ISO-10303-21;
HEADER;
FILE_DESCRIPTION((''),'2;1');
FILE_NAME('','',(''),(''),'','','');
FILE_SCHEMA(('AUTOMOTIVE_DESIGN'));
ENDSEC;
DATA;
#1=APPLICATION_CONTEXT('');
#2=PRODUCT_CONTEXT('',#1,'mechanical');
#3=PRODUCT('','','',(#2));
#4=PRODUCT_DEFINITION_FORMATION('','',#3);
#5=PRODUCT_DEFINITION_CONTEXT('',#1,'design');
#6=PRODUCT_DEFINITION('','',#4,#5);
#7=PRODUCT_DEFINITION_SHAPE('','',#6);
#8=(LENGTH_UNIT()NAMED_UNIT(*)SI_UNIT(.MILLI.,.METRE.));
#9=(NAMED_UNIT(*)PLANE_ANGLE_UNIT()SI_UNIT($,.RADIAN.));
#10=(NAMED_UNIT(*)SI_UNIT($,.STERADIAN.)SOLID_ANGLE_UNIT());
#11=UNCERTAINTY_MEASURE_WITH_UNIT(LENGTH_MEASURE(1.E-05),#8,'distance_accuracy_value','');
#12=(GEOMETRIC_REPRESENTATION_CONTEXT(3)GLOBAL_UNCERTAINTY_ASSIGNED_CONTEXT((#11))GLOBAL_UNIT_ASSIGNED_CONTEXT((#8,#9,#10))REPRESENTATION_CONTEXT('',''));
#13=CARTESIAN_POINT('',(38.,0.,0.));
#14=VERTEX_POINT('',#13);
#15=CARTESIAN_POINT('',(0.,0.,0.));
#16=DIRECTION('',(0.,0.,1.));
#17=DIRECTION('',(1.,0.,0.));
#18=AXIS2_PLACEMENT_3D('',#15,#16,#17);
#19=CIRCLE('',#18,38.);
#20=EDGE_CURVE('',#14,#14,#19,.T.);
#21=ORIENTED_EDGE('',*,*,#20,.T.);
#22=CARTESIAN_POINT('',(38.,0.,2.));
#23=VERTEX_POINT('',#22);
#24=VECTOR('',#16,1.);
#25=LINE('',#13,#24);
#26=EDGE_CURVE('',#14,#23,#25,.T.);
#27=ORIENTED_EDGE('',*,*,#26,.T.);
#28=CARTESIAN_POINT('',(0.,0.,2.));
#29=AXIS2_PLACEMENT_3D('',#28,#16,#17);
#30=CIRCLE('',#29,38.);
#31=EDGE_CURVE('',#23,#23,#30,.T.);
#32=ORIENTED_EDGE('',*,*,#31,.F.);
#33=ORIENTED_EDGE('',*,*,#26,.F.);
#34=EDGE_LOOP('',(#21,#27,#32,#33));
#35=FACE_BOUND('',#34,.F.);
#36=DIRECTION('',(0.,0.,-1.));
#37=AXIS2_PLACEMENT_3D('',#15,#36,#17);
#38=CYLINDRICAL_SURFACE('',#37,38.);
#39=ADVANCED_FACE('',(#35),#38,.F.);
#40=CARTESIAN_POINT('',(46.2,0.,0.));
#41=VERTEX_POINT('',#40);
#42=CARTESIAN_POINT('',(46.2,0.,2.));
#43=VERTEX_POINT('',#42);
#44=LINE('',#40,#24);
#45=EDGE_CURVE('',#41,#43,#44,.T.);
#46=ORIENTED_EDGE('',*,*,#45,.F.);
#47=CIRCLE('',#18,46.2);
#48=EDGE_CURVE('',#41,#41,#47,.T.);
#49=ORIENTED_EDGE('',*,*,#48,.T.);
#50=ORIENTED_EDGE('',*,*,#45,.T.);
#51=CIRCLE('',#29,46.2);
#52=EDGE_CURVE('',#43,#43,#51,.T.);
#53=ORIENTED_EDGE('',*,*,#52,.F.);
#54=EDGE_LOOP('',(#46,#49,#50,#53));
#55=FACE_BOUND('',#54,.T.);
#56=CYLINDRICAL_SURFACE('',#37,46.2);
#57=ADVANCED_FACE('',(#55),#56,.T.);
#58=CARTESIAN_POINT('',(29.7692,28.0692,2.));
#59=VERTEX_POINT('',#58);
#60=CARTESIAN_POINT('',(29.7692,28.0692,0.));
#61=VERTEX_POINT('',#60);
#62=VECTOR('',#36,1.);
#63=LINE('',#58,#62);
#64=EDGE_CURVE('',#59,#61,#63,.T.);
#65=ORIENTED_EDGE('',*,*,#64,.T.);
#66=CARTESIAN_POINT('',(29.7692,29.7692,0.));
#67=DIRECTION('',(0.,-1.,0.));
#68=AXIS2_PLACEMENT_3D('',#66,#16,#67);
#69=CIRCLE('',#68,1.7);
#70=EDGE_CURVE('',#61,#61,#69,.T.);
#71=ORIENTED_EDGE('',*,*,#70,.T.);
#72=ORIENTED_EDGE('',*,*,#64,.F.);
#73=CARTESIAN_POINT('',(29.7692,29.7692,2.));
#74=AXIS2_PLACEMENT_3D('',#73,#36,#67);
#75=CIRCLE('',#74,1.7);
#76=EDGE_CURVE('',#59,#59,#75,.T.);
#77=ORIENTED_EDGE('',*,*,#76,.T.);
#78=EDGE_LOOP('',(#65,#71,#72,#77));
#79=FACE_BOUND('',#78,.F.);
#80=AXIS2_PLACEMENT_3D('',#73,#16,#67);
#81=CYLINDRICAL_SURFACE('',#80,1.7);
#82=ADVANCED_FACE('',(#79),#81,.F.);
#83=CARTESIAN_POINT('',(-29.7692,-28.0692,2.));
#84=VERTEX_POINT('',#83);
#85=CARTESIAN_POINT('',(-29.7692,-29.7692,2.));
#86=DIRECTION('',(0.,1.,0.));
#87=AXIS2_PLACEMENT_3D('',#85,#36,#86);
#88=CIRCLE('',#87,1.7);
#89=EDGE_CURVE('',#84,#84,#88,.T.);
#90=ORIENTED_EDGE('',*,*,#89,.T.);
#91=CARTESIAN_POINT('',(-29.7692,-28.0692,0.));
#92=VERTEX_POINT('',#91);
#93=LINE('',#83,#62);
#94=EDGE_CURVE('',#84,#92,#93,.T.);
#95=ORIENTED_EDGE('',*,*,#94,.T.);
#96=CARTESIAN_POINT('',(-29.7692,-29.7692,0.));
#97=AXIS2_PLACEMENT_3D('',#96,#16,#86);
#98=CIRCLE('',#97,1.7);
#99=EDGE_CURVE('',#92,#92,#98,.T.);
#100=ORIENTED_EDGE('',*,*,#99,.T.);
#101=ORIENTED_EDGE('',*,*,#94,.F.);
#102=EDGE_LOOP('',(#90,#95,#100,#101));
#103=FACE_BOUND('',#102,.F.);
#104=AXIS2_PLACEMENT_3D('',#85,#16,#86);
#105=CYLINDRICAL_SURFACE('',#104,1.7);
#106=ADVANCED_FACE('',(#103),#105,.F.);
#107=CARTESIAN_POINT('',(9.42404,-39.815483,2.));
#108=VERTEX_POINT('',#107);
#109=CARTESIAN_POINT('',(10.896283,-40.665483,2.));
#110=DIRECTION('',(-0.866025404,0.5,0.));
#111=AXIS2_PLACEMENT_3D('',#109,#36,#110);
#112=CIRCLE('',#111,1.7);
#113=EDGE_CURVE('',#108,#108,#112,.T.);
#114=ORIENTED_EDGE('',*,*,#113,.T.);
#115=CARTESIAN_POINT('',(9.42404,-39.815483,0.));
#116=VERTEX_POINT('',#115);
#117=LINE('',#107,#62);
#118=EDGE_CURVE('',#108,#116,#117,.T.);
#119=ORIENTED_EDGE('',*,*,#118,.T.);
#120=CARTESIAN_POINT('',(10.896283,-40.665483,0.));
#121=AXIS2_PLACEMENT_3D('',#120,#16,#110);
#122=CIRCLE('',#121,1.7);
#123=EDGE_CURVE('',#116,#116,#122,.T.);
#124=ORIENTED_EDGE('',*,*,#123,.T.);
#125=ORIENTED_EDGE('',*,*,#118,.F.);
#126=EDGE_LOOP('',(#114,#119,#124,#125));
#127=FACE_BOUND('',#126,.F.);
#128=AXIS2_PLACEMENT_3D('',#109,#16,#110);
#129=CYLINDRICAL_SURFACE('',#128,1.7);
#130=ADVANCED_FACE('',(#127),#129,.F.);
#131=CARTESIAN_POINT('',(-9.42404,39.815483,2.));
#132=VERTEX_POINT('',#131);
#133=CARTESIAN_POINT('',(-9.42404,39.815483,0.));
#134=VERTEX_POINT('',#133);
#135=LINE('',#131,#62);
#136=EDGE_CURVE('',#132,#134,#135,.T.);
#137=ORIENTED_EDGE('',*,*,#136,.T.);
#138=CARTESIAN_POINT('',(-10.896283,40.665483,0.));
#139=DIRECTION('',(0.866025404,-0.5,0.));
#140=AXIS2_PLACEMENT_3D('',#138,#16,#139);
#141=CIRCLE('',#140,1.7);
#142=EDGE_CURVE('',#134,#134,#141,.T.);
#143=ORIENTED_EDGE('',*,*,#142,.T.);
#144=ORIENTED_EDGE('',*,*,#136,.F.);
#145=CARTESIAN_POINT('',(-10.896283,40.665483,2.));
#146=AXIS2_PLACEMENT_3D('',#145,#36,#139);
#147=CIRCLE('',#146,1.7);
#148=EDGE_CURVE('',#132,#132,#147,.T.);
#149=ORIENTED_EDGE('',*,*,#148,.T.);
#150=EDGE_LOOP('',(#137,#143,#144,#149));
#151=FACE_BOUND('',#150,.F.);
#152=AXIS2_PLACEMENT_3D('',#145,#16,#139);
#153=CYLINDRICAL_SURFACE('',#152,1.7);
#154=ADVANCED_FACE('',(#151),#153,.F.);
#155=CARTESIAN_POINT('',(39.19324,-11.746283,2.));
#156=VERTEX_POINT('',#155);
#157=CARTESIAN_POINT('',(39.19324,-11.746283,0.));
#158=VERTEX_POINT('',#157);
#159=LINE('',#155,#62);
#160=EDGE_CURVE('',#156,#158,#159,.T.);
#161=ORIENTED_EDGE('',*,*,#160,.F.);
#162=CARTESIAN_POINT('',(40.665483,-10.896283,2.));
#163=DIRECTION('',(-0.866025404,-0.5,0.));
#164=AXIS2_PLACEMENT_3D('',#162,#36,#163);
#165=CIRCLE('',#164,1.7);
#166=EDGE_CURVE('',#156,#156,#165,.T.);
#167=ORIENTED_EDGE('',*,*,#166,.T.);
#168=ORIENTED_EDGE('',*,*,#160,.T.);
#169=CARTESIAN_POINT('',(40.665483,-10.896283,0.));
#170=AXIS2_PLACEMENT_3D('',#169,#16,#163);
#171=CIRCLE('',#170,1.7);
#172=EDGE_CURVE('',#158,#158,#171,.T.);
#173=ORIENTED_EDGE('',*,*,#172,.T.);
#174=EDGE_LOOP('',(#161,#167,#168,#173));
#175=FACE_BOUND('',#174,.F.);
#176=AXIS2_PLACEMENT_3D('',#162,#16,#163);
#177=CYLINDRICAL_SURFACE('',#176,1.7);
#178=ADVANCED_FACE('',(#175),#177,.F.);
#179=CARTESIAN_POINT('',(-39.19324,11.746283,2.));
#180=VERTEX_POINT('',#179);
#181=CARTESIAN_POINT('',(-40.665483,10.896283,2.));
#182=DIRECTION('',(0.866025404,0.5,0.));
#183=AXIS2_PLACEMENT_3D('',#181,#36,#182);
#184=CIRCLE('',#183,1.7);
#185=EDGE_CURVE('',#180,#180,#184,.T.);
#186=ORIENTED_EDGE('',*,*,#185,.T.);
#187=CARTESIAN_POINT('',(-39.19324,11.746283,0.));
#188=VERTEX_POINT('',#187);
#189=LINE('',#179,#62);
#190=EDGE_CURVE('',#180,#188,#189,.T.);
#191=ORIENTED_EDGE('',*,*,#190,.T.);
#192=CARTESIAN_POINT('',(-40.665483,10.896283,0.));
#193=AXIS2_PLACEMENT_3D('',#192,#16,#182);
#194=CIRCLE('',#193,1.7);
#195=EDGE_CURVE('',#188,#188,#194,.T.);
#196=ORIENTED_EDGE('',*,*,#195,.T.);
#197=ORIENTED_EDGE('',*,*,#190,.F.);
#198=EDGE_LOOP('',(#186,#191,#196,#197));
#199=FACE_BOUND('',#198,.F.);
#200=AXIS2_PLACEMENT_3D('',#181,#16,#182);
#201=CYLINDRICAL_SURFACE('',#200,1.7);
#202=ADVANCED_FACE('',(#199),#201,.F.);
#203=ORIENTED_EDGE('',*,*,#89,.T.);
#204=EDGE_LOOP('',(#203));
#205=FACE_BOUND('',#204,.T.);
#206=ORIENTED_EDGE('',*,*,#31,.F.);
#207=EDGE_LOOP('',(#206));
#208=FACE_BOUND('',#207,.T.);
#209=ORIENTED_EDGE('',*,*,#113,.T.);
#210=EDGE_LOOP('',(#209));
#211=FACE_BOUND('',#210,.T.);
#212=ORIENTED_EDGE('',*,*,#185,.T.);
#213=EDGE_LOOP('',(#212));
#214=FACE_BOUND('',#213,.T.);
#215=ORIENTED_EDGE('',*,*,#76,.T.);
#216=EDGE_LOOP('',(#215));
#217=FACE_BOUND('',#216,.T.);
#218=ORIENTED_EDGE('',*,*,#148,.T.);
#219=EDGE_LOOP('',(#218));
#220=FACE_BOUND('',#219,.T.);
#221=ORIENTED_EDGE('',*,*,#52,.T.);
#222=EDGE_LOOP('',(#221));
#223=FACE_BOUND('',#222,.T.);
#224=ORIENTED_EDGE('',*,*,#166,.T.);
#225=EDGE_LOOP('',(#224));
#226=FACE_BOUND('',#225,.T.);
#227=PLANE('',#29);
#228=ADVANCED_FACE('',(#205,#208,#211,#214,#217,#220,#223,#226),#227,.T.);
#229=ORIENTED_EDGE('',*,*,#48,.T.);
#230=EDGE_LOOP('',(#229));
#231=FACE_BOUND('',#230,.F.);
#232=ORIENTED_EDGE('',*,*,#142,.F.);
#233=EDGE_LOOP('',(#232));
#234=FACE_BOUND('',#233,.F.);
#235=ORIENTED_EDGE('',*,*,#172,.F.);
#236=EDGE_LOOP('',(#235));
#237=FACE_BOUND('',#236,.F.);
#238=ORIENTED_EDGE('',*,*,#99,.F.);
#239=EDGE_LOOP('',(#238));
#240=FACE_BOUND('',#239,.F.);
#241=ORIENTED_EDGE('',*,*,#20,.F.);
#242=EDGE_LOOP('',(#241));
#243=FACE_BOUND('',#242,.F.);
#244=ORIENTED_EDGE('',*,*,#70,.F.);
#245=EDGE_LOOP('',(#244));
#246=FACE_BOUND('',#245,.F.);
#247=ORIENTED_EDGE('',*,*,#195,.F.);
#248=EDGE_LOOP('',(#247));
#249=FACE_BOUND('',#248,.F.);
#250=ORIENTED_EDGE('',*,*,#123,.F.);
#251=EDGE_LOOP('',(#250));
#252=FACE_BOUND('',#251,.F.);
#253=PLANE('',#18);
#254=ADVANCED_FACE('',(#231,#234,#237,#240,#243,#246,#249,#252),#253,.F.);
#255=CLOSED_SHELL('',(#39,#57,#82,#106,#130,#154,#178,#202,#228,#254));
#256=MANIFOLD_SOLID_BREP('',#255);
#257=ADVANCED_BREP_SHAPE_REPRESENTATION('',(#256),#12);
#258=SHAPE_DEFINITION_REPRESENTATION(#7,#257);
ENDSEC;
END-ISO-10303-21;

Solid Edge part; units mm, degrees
sketch "Sketch1" plane through (0, 0, 0) normal (0, 0, 1) x (1, 0, 0)
  circle A0 centre (0, 0) radius 38
  circle A1 centre (0, 0) radius 46.2
extrude "Protrusion1" add sketch "Sketch1" along normal blind 2
hole "Hole1" at (29.7692, 29.7692, 2) direction (0, 0, -1) diameter 3.4 end up to next
pattern_circular "Pattern1" count 6 over 360 about axis through (0, 0, 2) along (0, 0, -1) of "Hole1"
